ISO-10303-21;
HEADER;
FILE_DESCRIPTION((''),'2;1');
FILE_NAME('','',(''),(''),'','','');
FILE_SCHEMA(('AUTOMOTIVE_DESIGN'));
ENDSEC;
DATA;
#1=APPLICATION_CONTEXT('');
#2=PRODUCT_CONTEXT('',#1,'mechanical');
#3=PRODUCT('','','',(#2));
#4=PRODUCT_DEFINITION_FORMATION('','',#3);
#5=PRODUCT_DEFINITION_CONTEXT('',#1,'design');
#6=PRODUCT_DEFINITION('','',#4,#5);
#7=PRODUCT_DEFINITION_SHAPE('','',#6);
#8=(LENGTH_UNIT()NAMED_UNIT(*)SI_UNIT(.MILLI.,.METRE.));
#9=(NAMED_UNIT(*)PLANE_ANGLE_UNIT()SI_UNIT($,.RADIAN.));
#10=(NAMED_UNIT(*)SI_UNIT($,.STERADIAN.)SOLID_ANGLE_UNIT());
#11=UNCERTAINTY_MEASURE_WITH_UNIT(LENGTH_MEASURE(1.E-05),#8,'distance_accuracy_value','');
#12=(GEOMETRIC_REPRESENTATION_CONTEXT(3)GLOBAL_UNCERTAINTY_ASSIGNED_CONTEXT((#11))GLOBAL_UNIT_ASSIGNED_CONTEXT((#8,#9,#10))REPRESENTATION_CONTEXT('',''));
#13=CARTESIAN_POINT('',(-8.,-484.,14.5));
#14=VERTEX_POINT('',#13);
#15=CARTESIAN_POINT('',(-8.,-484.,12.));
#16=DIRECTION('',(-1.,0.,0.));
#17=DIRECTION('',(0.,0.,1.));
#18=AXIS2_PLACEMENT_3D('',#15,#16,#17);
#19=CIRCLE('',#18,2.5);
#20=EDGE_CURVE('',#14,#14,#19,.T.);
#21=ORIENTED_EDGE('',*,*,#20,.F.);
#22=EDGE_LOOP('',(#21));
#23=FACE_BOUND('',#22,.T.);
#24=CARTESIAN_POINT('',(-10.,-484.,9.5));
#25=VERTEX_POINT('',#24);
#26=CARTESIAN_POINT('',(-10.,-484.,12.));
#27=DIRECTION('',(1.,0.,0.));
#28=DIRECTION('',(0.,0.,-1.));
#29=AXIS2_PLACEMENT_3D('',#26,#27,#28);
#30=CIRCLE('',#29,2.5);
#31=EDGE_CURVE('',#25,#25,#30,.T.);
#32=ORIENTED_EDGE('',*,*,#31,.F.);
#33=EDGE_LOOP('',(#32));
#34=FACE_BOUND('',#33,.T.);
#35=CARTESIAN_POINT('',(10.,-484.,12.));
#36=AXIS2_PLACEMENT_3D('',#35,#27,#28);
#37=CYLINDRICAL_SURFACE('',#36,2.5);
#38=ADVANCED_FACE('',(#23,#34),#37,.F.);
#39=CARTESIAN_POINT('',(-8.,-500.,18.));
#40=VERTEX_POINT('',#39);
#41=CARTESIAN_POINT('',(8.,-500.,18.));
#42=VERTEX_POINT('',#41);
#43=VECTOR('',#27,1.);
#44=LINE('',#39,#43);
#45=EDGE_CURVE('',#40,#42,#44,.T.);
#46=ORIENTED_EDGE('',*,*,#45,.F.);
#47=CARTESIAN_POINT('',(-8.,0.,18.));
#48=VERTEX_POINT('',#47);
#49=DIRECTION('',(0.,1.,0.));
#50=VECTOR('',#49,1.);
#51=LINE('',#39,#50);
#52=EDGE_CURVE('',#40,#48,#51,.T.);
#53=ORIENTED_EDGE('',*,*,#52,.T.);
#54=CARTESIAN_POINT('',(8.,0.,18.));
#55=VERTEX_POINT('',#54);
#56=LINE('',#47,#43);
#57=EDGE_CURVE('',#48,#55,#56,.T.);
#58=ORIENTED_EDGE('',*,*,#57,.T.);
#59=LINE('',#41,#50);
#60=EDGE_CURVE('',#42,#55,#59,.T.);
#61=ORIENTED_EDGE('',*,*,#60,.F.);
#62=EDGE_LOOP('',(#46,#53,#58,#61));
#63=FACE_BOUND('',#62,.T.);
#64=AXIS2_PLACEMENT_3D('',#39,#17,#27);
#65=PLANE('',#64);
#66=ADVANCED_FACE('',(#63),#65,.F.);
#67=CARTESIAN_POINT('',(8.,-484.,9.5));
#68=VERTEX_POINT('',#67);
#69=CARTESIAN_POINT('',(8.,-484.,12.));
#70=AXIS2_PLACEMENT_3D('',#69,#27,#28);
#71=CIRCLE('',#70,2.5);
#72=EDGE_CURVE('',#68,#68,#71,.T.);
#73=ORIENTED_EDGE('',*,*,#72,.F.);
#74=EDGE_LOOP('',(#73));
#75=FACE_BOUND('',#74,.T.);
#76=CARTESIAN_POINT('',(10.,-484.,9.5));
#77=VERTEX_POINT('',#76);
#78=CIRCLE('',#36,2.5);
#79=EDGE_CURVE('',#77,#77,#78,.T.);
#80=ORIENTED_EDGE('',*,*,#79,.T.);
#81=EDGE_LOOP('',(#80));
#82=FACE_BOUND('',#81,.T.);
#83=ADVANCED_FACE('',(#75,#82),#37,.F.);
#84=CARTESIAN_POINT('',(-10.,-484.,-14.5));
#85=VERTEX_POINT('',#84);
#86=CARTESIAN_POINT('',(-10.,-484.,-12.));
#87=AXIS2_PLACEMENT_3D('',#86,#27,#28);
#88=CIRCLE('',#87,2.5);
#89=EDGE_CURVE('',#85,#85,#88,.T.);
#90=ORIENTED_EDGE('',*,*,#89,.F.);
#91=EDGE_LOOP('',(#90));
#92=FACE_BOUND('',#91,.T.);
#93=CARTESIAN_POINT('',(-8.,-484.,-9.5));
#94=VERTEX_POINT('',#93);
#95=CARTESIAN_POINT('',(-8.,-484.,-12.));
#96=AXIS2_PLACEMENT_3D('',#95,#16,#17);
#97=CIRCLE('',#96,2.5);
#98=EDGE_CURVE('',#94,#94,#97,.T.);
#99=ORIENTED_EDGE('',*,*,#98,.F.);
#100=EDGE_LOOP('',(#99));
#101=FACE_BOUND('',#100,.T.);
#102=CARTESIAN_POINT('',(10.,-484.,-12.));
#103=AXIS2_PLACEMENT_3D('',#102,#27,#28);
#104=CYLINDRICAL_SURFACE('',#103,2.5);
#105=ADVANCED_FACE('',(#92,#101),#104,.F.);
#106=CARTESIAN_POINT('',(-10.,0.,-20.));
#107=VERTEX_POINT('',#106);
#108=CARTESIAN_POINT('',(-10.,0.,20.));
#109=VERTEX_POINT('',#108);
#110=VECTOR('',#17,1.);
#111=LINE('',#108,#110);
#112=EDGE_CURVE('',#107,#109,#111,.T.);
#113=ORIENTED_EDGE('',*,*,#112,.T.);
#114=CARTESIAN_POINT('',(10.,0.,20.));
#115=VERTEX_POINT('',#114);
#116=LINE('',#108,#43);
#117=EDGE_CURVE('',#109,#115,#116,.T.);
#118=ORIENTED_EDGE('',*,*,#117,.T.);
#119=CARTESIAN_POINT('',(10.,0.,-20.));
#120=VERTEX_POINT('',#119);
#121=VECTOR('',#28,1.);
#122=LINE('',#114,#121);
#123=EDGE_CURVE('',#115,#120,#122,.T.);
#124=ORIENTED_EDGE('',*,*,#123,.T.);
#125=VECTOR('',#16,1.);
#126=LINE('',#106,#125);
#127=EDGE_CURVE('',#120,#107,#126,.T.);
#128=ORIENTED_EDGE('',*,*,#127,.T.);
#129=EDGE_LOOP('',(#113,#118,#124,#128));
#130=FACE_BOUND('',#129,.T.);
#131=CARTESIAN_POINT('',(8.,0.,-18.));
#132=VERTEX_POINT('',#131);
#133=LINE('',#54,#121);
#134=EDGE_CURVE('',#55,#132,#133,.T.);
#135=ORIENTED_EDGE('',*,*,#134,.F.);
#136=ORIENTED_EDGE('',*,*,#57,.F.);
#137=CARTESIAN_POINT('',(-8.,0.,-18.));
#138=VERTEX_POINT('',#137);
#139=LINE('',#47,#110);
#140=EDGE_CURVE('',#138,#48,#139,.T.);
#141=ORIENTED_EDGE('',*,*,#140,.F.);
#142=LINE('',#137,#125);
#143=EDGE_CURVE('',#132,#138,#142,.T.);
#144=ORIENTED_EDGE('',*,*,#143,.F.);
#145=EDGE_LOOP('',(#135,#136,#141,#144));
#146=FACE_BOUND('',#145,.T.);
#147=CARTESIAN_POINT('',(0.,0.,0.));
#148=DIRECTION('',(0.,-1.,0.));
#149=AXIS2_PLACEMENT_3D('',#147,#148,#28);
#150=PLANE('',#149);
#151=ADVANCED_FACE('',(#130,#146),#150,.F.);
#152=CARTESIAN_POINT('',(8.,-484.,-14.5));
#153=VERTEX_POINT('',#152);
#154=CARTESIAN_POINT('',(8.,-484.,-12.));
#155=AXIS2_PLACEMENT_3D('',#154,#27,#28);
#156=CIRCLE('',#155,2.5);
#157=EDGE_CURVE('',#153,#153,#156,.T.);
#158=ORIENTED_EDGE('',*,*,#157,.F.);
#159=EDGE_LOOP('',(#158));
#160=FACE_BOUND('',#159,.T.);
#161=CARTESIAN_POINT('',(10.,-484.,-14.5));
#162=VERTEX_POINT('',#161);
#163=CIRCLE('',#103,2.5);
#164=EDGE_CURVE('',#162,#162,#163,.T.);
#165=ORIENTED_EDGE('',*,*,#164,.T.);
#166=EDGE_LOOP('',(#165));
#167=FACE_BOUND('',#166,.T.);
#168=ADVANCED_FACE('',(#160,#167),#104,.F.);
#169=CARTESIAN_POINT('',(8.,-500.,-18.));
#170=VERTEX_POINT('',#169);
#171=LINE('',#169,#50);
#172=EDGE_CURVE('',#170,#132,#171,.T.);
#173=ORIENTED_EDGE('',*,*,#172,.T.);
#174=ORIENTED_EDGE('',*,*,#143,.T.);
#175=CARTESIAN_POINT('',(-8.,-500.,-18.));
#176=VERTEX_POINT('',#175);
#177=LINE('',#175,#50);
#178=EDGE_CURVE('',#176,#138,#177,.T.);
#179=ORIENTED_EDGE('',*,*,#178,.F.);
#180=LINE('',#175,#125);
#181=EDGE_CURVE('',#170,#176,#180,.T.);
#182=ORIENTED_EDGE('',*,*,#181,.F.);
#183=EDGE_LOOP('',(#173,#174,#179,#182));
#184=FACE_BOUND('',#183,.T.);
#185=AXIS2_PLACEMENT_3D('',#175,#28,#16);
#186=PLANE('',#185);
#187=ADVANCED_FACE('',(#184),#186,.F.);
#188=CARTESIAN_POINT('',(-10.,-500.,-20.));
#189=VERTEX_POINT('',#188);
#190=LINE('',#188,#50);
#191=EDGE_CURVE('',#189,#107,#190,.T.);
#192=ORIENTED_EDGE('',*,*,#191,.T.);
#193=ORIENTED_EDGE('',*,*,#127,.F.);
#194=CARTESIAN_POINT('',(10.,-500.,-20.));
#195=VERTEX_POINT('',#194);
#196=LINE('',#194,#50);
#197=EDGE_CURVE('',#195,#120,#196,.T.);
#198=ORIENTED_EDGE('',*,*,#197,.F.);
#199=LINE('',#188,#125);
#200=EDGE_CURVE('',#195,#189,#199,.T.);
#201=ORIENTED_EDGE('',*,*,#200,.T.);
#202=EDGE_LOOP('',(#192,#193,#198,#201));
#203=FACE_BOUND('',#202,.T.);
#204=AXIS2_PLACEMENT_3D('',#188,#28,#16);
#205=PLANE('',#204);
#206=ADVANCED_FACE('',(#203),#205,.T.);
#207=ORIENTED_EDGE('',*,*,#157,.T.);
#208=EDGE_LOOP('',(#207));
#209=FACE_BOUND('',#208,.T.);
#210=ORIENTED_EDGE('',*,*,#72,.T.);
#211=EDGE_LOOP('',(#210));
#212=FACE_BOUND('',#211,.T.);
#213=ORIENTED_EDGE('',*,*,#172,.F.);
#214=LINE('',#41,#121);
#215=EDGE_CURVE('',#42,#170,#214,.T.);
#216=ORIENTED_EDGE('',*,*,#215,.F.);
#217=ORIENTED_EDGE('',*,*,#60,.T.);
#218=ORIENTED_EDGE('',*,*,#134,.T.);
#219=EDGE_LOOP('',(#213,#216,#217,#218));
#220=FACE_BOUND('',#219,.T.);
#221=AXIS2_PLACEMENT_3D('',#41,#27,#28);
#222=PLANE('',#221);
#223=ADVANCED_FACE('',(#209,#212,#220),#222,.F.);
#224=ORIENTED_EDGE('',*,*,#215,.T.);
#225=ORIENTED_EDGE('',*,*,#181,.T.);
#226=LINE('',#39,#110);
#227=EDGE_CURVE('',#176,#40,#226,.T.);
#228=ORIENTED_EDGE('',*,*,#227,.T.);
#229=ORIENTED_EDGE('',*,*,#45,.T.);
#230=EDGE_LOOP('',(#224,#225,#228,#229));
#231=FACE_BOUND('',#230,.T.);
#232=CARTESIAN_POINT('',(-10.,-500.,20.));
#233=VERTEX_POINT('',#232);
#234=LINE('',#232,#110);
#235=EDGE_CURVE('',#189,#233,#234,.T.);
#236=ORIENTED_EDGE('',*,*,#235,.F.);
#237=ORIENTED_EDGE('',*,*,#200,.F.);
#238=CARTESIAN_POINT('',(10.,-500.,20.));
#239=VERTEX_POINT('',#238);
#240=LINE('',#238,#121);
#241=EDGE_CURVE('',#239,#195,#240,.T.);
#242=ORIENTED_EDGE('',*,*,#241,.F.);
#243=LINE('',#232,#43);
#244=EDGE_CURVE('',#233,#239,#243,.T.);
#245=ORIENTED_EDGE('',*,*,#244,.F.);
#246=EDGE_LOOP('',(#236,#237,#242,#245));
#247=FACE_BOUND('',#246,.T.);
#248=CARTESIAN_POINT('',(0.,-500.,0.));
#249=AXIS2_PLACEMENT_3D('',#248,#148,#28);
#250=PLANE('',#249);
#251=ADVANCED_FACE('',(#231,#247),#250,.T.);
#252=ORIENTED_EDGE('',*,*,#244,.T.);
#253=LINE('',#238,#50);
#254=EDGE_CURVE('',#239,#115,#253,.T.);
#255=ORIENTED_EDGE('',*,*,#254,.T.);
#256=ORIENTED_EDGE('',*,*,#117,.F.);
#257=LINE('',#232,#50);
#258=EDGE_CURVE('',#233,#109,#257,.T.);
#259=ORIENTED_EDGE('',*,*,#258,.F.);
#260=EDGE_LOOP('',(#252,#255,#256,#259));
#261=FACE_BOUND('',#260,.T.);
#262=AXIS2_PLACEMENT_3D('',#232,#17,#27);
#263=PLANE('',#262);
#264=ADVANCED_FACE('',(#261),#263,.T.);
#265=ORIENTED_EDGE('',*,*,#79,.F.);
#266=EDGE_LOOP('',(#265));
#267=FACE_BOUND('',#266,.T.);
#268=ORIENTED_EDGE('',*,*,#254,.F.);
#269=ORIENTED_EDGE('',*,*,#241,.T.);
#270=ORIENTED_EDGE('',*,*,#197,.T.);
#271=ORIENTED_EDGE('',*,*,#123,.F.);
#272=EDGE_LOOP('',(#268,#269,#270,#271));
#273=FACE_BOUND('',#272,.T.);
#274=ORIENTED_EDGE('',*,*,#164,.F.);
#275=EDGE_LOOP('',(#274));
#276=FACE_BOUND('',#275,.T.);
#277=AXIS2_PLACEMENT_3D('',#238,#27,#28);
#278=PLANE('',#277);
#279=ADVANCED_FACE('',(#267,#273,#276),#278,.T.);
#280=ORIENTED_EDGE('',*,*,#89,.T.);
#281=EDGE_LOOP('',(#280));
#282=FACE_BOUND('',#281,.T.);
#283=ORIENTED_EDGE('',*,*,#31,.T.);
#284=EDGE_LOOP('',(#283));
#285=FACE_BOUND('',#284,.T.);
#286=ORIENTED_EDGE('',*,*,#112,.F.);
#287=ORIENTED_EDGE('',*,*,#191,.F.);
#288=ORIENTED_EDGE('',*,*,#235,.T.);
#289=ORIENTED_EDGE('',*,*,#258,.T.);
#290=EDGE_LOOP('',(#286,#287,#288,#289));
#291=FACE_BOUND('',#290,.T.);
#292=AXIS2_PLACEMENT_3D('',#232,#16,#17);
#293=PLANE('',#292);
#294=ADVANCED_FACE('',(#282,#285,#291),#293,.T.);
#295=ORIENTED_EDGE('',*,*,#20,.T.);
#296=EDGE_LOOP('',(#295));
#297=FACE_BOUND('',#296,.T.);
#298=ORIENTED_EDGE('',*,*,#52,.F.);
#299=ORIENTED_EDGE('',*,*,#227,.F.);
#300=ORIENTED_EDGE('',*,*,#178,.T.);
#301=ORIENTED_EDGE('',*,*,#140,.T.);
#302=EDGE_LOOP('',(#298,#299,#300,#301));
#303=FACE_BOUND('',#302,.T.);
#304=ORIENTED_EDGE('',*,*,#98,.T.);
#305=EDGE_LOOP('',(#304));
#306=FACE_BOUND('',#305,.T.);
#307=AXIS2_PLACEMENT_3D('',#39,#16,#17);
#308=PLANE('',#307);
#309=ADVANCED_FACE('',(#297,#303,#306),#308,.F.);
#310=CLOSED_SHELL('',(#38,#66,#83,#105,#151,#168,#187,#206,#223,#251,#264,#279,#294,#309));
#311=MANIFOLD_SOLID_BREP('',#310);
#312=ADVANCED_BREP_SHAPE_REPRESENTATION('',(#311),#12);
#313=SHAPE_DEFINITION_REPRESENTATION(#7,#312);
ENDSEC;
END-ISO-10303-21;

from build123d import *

# Parameters (mm, degrees)
SKETCH3_W                   = 20
SKETCH3_H                   = 40
SKETCH3_W_2                 = 16
SKETCH3_H_2                 = 36
BASE_FLANGE1_DEPTH          = 500
TAP_DRILL_FOR_M6X1_0_TAP1_D = 5


# Sheet-metal steps are written as plain solids
with BuildPart() as part:
    # Sketch3 → Base-Flange1 (new body)
    with BuildSketch(Plane(origin=(0, 0, 0), x_dir=(1, 0, 0), z_dir=(0, 1, 0))):
        Rectangle(SKETCH3_W, SKETCH3_H)
        Rectangle(SKETCH3_W_2, SKETCH3_H_2, mode=Mode.SUBTRACT)
    extrude(amount=-BASE_FLANGE1_DEPTH)

    # Tap Drill for M6x1.0 Tap1 (through all)
    with Locations(Plane(origin=(10, 0, 0), x_dir=(0, 0, -1), z_dir=(1, 0, 0))):
        with Locations((-12, -484), (12, -484)):
            Hole(TAP_DRILL_FOR_M6X1_0_TAP1_D / 2)


solid = part.part
